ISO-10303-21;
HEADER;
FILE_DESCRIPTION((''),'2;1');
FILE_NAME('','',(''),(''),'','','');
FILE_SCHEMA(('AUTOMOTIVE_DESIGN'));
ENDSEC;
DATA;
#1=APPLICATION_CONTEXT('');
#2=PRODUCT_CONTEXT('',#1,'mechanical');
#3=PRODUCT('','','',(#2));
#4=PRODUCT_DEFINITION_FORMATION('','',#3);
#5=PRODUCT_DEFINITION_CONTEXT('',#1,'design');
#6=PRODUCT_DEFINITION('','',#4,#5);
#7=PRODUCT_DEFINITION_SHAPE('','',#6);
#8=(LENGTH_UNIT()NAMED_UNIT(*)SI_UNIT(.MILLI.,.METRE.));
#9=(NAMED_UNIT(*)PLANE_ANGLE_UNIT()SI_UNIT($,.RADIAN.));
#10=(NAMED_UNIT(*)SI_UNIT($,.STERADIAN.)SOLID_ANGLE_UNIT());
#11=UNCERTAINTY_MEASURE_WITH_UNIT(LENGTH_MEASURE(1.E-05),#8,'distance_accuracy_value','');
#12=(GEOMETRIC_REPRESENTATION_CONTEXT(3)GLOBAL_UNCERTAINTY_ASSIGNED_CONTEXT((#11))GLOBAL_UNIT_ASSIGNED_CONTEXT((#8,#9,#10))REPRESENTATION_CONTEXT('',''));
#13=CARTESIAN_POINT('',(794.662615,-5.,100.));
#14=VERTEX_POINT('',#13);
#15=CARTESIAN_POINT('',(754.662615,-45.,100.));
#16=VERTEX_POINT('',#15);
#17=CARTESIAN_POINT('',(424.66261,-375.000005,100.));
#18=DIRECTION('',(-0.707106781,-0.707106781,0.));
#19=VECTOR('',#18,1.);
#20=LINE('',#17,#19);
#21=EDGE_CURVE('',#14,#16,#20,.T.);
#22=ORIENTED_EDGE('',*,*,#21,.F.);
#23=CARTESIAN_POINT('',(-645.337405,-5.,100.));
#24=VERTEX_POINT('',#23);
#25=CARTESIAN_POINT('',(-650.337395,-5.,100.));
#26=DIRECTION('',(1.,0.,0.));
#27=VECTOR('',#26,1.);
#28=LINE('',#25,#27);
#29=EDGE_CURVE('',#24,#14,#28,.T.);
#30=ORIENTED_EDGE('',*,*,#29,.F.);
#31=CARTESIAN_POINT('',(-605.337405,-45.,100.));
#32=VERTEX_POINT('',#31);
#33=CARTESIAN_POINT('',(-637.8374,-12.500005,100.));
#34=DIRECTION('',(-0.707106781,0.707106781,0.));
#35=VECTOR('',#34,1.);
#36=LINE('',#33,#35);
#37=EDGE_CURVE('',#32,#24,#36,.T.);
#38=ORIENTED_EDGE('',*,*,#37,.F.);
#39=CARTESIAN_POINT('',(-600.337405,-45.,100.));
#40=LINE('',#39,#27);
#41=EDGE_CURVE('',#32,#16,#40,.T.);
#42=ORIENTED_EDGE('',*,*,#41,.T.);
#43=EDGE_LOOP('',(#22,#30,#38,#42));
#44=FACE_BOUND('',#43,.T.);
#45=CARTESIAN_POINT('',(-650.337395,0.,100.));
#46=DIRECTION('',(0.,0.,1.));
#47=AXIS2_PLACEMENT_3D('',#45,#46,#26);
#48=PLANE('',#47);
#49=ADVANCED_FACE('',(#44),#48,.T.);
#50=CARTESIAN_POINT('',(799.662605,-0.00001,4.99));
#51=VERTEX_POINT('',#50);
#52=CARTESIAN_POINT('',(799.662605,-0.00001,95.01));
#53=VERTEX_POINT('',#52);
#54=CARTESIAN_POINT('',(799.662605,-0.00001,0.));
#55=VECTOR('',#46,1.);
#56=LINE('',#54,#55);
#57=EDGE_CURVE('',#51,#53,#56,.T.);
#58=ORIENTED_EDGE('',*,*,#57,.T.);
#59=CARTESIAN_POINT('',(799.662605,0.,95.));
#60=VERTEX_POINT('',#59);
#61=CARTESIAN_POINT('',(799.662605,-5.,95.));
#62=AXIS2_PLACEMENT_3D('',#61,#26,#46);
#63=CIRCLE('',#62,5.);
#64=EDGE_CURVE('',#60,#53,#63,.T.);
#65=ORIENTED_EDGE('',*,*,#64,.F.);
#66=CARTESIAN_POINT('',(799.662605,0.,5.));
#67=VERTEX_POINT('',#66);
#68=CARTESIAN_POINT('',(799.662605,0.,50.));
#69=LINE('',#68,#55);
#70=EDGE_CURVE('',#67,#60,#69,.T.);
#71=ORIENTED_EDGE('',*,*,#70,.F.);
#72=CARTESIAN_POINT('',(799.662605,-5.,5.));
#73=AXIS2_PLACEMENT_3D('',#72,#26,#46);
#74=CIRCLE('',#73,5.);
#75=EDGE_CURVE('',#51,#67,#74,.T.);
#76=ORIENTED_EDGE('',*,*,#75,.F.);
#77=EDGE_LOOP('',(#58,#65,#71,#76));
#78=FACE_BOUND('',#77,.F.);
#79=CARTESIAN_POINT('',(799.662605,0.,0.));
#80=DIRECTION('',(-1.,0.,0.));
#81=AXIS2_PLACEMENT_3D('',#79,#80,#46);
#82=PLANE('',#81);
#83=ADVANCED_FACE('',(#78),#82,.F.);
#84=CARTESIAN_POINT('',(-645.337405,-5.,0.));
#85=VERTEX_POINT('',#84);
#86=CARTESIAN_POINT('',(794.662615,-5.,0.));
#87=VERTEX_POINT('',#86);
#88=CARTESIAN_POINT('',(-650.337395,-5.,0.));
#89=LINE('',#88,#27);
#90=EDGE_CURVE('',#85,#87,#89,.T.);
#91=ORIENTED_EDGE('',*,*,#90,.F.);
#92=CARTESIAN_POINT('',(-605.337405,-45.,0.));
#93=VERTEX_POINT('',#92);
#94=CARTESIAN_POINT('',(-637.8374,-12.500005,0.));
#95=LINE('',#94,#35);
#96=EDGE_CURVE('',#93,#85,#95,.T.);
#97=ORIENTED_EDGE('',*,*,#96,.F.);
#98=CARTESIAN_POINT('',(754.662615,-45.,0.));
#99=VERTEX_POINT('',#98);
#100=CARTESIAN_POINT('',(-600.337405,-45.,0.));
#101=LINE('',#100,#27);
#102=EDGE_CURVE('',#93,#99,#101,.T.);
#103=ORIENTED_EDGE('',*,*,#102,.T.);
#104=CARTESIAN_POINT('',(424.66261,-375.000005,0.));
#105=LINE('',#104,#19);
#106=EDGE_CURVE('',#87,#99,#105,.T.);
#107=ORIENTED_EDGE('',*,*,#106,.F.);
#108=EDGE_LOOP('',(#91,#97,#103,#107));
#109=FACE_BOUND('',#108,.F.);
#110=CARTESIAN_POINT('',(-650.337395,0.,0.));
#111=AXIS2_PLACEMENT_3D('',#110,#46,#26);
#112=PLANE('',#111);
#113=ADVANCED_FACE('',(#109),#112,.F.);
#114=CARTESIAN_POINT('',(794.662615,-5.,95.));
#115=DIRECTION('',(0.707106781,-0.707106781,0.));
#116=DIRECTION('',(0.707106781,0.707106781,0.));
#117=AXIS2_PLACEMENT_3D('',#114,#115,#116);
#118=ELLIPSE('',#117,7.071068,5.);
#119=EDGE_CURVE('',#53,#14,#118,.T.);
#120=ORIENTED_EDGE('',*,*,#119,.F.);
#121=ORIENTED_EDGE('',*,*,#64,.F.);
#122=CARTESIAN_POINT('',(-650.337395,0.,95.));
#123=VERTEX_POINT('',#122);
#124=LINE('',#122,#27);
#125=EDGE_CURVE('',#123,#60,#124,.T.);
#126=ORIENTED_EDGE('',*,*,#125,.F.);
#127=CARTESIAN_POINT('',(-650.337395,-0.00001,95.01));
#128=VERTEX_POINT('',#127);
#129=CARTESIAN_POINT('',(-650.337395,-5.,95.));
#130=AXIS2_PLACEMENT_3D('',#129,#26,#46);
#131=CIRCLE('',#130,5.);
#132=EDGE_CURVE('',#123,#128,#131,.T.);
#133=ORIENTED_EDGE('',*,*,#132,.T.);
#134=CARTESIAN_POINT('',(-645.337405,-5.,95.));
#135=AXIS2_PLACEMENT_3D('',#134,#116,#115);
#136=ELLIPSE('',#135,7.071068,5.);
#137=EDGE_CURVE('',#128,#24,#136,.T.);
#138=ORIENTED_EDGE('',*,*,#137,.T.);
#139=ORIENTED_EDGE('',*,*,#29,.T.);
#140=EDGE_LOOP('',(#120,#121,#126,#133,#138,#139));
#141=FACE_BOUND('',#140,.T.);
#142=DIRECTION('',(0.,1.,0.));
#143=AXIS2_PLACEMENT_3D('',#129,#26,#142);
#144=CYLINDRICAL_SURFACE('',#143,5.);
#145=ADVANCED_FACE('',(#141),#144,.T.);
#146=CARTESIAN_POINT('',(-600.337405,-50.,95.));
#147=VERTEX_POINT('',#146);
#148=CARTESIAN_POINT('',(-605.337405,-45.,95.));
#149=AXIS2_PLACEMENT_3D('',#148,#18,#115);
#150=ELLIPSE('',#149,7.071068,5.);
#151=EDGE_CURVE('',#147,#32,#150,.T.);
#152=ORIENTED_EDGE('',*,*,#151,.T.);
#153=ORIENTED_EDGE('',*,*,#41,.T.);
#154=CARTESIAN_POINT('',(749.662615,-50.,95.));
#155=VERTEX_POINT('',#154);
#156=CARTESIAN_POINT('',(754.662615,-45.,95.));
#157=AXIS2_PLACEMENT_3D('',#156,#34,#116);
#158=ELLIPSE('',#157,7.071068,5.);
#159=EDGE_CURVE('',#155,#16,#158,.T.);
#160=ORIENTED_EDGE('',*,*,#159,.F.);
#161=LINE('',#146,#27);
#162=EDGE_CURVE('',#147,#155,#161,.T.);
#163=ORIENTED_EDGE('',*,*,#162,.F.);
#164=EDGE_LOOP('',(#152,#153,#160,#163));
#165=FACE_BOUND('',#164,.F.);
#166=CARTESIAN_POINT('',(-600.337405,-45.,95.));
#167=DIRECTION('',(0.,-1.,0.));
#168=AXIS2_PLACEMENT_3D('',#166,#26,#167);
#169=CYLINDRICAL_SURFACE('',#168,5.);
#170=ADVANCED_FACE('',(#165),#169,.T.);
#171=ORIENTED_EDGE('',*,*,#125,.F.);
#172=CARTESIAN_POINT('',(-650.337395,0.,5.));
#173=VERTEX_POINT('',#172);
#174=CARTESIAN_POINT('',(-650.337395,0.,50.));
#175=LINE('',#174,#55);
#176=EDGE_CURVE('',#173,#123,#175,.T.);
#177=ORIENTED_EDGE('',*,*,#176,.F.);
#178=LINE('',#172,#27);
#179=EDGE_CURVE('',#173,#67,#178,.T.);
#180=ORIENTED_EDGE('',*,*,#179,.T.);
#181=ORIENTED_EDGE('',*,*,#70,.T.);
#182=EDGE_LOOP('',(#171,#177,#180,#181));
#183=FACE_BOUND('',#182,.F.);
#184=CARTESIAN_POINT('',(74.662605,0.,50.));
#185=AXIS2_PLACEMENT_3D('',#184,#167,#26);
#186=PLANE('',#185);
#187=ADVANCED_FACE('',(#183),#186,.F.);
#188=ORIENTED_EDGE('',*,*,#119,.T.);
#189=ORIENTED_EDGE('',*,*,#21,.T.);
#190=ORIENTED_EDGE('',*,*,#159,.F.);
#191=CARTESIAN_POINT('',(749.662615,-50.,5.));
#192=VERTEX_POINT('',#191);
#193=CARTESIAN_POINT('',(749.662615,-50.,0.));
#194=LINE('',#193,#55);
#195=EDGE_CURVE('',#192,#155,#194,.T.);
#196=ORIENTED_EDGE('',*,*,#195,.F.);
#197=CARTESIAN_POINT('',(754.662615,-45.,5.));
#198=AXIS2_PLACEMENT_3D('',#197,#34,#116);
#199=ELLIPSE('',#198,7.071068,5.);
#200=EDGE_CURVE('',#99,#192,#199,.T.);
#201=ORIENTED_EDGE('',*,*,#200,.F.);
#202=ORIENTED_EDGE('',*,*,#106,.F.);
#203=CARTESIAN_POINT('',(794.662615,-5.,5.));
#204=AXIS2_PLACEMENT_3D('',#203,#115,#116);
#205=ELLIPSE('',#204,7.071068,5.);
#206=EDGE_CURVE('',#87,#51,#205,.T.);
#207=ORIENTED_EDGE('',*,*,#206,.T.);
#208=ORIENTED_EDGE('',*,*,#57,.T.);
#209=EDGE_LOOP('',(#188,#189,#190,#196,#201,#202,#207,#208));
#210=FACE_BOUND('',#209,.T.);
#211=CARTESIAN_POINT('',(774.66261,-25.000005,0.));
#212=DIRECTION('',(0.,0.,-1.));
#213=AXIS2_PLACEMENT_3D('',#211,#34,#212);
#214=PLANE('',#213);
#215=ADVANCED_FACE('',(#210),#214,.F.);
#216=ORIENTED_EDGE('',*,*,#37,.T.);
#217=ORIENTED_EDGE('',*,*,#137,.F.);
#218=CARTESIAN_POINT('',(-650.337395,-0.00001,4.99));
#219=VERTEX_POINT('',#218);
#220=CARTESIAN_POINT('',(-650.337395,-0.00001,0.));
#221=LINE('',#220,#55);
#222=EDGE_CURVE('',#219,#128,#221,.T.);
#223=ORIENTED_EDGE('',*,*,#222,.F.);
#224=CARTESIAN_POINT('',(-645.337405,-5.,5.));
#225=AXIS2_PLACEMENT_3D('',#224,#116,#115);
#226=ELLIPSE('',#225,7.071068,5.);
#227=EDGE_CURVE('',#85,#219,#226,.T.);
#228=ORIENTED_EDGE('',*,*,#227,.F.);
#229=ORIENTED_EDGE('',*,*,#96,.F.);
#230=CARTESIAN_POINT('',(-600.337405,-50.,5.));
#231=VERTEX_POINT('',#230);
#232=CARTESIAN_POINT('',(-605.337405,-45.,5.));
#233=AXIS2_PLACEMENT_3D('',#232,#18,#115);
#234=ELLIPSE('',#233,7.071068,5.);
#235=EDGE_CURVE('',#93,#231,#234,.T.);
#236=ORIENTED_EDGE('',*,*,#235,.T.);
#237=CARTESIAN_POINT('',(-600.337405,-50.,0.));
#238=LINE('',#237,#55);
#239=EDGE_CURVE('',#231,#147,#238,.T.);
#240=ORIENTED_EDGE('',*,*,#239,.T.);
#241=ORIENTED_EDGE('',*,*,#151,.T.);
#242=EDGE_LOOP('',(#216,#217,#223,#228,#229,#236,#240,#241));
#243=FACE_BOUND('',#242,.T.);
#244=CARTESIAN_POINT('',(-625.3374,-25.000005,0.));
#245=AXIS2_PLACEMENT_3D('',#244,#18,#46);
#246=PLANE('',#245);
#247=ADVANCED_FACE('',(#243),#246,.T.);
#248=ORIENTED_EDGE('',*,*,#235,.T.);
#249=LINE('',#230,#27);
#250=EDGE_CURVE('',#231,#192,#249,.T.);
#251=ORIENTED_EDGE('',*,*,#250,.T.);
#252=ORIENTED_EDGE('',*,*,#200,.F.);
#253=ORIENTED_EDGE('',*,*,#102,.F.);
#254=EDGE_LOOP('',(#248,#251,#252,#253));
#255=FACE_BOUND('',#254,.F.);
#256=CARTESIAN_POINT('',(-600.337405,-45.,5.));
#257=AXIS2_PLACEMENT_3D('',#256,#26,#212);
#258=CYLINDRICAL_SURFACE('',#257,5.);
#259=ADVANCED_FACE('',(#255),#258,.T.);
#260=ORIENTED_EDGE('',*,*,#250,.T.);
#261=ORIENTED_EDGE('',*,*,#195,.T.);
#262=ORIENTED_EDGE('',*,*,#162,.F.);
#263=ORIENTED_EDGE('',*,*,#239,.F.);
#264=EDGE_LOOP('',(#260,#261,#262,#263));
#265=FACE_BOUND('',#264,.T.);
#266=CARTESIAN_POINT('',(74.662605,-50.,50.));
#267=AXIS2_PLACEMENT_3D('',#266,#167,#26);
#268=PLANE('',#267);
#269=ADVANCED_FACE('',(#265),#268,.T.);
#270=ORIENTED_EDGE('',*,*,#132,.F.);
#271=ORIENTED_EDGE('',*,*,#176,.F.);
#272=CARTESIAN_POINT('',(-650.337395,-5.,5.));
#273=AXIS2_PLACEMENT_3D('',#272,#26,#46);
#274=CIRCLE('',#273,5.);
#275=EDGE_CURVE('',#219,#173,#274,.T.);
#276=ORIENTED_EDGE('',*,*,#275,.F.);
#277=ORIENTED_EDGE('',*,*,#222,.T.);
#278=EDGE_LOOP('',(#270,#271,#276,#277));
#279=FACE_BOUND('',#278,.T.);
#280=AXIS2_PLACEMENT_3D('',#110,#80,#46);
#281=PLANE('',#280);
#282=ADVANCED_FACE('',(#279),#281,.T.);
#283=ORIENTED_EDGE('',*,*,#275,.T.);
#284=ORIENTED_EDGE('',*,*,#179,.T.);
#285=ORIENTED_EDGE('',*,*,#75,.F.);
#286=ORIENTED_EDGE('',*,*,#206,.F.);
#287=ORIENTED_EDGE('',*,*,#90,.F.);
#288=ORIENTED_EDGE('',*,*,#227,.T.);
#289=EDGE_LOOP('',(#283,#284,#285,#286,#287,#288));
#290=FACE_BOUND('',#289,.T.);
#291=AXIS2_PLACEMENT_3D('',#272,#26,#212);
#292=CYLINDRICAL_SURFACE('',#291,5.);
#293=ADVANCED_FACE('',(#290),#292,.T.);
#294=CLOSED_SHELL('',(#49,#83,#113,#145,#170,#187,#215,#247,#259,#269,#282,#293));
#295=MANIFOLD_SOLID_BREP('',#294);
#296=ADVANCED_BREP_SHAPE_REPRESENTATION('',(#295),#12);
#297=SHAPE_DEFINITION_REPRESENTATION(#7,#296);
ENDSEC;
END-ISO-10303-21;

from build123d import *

# Parameters (mm, degrees)
F0_W     = 1450
F0_H     = 100
F4_DEPTH = 50
F1_SIZE  = 49.99999
F2_SIZE  = 49.99999
F3_R     = 5


# Not quite as in the source:
# - a fillet or chamfer is up to 0.001 mm smaller than in the source, because OpenCascade refuses the exact size


with BuildPart() as f4:
    # F0 (on Front) → F4 (new body)
    with BuildSketch(Plane.XZ):
        with Locations((74.6626051481, 50)):
            Rectangle(F0_W, F0_H)
    extrude(amount=F4_DEPTH)

    # F1 (size 50 in the source; OpenCascade refuses exactly that, so slightly less here)
    f1_edges = [f4.edges().sort_by_distance(p)[0] for p in [
        (799.662605, -50, 50),
    ]]
    chamfer(f1_edges, length=F1_SIZE)

    # F2 (size 50 in the source; OpenCascade refuses exactly that, so slightly less here)
    f2_edges = [f4.edges().sort_by_distance(p)[0] for p in [
        (-650.337395, -50, 50),
    ]]
    chamfer(f2_edges, length=F2_SIZE)

    # F3
    f3_edges = [f4.edges().sort_by_distance(p)[0] for p in [
        (74.662605, -50, 100),
        (74.662605, -50, 0),
        (74.662605, 0, 100),
        (74.662605, 0, 0),
    ]]
    fillet(f3_edges, radius=F3_R)


solid = f4.part
